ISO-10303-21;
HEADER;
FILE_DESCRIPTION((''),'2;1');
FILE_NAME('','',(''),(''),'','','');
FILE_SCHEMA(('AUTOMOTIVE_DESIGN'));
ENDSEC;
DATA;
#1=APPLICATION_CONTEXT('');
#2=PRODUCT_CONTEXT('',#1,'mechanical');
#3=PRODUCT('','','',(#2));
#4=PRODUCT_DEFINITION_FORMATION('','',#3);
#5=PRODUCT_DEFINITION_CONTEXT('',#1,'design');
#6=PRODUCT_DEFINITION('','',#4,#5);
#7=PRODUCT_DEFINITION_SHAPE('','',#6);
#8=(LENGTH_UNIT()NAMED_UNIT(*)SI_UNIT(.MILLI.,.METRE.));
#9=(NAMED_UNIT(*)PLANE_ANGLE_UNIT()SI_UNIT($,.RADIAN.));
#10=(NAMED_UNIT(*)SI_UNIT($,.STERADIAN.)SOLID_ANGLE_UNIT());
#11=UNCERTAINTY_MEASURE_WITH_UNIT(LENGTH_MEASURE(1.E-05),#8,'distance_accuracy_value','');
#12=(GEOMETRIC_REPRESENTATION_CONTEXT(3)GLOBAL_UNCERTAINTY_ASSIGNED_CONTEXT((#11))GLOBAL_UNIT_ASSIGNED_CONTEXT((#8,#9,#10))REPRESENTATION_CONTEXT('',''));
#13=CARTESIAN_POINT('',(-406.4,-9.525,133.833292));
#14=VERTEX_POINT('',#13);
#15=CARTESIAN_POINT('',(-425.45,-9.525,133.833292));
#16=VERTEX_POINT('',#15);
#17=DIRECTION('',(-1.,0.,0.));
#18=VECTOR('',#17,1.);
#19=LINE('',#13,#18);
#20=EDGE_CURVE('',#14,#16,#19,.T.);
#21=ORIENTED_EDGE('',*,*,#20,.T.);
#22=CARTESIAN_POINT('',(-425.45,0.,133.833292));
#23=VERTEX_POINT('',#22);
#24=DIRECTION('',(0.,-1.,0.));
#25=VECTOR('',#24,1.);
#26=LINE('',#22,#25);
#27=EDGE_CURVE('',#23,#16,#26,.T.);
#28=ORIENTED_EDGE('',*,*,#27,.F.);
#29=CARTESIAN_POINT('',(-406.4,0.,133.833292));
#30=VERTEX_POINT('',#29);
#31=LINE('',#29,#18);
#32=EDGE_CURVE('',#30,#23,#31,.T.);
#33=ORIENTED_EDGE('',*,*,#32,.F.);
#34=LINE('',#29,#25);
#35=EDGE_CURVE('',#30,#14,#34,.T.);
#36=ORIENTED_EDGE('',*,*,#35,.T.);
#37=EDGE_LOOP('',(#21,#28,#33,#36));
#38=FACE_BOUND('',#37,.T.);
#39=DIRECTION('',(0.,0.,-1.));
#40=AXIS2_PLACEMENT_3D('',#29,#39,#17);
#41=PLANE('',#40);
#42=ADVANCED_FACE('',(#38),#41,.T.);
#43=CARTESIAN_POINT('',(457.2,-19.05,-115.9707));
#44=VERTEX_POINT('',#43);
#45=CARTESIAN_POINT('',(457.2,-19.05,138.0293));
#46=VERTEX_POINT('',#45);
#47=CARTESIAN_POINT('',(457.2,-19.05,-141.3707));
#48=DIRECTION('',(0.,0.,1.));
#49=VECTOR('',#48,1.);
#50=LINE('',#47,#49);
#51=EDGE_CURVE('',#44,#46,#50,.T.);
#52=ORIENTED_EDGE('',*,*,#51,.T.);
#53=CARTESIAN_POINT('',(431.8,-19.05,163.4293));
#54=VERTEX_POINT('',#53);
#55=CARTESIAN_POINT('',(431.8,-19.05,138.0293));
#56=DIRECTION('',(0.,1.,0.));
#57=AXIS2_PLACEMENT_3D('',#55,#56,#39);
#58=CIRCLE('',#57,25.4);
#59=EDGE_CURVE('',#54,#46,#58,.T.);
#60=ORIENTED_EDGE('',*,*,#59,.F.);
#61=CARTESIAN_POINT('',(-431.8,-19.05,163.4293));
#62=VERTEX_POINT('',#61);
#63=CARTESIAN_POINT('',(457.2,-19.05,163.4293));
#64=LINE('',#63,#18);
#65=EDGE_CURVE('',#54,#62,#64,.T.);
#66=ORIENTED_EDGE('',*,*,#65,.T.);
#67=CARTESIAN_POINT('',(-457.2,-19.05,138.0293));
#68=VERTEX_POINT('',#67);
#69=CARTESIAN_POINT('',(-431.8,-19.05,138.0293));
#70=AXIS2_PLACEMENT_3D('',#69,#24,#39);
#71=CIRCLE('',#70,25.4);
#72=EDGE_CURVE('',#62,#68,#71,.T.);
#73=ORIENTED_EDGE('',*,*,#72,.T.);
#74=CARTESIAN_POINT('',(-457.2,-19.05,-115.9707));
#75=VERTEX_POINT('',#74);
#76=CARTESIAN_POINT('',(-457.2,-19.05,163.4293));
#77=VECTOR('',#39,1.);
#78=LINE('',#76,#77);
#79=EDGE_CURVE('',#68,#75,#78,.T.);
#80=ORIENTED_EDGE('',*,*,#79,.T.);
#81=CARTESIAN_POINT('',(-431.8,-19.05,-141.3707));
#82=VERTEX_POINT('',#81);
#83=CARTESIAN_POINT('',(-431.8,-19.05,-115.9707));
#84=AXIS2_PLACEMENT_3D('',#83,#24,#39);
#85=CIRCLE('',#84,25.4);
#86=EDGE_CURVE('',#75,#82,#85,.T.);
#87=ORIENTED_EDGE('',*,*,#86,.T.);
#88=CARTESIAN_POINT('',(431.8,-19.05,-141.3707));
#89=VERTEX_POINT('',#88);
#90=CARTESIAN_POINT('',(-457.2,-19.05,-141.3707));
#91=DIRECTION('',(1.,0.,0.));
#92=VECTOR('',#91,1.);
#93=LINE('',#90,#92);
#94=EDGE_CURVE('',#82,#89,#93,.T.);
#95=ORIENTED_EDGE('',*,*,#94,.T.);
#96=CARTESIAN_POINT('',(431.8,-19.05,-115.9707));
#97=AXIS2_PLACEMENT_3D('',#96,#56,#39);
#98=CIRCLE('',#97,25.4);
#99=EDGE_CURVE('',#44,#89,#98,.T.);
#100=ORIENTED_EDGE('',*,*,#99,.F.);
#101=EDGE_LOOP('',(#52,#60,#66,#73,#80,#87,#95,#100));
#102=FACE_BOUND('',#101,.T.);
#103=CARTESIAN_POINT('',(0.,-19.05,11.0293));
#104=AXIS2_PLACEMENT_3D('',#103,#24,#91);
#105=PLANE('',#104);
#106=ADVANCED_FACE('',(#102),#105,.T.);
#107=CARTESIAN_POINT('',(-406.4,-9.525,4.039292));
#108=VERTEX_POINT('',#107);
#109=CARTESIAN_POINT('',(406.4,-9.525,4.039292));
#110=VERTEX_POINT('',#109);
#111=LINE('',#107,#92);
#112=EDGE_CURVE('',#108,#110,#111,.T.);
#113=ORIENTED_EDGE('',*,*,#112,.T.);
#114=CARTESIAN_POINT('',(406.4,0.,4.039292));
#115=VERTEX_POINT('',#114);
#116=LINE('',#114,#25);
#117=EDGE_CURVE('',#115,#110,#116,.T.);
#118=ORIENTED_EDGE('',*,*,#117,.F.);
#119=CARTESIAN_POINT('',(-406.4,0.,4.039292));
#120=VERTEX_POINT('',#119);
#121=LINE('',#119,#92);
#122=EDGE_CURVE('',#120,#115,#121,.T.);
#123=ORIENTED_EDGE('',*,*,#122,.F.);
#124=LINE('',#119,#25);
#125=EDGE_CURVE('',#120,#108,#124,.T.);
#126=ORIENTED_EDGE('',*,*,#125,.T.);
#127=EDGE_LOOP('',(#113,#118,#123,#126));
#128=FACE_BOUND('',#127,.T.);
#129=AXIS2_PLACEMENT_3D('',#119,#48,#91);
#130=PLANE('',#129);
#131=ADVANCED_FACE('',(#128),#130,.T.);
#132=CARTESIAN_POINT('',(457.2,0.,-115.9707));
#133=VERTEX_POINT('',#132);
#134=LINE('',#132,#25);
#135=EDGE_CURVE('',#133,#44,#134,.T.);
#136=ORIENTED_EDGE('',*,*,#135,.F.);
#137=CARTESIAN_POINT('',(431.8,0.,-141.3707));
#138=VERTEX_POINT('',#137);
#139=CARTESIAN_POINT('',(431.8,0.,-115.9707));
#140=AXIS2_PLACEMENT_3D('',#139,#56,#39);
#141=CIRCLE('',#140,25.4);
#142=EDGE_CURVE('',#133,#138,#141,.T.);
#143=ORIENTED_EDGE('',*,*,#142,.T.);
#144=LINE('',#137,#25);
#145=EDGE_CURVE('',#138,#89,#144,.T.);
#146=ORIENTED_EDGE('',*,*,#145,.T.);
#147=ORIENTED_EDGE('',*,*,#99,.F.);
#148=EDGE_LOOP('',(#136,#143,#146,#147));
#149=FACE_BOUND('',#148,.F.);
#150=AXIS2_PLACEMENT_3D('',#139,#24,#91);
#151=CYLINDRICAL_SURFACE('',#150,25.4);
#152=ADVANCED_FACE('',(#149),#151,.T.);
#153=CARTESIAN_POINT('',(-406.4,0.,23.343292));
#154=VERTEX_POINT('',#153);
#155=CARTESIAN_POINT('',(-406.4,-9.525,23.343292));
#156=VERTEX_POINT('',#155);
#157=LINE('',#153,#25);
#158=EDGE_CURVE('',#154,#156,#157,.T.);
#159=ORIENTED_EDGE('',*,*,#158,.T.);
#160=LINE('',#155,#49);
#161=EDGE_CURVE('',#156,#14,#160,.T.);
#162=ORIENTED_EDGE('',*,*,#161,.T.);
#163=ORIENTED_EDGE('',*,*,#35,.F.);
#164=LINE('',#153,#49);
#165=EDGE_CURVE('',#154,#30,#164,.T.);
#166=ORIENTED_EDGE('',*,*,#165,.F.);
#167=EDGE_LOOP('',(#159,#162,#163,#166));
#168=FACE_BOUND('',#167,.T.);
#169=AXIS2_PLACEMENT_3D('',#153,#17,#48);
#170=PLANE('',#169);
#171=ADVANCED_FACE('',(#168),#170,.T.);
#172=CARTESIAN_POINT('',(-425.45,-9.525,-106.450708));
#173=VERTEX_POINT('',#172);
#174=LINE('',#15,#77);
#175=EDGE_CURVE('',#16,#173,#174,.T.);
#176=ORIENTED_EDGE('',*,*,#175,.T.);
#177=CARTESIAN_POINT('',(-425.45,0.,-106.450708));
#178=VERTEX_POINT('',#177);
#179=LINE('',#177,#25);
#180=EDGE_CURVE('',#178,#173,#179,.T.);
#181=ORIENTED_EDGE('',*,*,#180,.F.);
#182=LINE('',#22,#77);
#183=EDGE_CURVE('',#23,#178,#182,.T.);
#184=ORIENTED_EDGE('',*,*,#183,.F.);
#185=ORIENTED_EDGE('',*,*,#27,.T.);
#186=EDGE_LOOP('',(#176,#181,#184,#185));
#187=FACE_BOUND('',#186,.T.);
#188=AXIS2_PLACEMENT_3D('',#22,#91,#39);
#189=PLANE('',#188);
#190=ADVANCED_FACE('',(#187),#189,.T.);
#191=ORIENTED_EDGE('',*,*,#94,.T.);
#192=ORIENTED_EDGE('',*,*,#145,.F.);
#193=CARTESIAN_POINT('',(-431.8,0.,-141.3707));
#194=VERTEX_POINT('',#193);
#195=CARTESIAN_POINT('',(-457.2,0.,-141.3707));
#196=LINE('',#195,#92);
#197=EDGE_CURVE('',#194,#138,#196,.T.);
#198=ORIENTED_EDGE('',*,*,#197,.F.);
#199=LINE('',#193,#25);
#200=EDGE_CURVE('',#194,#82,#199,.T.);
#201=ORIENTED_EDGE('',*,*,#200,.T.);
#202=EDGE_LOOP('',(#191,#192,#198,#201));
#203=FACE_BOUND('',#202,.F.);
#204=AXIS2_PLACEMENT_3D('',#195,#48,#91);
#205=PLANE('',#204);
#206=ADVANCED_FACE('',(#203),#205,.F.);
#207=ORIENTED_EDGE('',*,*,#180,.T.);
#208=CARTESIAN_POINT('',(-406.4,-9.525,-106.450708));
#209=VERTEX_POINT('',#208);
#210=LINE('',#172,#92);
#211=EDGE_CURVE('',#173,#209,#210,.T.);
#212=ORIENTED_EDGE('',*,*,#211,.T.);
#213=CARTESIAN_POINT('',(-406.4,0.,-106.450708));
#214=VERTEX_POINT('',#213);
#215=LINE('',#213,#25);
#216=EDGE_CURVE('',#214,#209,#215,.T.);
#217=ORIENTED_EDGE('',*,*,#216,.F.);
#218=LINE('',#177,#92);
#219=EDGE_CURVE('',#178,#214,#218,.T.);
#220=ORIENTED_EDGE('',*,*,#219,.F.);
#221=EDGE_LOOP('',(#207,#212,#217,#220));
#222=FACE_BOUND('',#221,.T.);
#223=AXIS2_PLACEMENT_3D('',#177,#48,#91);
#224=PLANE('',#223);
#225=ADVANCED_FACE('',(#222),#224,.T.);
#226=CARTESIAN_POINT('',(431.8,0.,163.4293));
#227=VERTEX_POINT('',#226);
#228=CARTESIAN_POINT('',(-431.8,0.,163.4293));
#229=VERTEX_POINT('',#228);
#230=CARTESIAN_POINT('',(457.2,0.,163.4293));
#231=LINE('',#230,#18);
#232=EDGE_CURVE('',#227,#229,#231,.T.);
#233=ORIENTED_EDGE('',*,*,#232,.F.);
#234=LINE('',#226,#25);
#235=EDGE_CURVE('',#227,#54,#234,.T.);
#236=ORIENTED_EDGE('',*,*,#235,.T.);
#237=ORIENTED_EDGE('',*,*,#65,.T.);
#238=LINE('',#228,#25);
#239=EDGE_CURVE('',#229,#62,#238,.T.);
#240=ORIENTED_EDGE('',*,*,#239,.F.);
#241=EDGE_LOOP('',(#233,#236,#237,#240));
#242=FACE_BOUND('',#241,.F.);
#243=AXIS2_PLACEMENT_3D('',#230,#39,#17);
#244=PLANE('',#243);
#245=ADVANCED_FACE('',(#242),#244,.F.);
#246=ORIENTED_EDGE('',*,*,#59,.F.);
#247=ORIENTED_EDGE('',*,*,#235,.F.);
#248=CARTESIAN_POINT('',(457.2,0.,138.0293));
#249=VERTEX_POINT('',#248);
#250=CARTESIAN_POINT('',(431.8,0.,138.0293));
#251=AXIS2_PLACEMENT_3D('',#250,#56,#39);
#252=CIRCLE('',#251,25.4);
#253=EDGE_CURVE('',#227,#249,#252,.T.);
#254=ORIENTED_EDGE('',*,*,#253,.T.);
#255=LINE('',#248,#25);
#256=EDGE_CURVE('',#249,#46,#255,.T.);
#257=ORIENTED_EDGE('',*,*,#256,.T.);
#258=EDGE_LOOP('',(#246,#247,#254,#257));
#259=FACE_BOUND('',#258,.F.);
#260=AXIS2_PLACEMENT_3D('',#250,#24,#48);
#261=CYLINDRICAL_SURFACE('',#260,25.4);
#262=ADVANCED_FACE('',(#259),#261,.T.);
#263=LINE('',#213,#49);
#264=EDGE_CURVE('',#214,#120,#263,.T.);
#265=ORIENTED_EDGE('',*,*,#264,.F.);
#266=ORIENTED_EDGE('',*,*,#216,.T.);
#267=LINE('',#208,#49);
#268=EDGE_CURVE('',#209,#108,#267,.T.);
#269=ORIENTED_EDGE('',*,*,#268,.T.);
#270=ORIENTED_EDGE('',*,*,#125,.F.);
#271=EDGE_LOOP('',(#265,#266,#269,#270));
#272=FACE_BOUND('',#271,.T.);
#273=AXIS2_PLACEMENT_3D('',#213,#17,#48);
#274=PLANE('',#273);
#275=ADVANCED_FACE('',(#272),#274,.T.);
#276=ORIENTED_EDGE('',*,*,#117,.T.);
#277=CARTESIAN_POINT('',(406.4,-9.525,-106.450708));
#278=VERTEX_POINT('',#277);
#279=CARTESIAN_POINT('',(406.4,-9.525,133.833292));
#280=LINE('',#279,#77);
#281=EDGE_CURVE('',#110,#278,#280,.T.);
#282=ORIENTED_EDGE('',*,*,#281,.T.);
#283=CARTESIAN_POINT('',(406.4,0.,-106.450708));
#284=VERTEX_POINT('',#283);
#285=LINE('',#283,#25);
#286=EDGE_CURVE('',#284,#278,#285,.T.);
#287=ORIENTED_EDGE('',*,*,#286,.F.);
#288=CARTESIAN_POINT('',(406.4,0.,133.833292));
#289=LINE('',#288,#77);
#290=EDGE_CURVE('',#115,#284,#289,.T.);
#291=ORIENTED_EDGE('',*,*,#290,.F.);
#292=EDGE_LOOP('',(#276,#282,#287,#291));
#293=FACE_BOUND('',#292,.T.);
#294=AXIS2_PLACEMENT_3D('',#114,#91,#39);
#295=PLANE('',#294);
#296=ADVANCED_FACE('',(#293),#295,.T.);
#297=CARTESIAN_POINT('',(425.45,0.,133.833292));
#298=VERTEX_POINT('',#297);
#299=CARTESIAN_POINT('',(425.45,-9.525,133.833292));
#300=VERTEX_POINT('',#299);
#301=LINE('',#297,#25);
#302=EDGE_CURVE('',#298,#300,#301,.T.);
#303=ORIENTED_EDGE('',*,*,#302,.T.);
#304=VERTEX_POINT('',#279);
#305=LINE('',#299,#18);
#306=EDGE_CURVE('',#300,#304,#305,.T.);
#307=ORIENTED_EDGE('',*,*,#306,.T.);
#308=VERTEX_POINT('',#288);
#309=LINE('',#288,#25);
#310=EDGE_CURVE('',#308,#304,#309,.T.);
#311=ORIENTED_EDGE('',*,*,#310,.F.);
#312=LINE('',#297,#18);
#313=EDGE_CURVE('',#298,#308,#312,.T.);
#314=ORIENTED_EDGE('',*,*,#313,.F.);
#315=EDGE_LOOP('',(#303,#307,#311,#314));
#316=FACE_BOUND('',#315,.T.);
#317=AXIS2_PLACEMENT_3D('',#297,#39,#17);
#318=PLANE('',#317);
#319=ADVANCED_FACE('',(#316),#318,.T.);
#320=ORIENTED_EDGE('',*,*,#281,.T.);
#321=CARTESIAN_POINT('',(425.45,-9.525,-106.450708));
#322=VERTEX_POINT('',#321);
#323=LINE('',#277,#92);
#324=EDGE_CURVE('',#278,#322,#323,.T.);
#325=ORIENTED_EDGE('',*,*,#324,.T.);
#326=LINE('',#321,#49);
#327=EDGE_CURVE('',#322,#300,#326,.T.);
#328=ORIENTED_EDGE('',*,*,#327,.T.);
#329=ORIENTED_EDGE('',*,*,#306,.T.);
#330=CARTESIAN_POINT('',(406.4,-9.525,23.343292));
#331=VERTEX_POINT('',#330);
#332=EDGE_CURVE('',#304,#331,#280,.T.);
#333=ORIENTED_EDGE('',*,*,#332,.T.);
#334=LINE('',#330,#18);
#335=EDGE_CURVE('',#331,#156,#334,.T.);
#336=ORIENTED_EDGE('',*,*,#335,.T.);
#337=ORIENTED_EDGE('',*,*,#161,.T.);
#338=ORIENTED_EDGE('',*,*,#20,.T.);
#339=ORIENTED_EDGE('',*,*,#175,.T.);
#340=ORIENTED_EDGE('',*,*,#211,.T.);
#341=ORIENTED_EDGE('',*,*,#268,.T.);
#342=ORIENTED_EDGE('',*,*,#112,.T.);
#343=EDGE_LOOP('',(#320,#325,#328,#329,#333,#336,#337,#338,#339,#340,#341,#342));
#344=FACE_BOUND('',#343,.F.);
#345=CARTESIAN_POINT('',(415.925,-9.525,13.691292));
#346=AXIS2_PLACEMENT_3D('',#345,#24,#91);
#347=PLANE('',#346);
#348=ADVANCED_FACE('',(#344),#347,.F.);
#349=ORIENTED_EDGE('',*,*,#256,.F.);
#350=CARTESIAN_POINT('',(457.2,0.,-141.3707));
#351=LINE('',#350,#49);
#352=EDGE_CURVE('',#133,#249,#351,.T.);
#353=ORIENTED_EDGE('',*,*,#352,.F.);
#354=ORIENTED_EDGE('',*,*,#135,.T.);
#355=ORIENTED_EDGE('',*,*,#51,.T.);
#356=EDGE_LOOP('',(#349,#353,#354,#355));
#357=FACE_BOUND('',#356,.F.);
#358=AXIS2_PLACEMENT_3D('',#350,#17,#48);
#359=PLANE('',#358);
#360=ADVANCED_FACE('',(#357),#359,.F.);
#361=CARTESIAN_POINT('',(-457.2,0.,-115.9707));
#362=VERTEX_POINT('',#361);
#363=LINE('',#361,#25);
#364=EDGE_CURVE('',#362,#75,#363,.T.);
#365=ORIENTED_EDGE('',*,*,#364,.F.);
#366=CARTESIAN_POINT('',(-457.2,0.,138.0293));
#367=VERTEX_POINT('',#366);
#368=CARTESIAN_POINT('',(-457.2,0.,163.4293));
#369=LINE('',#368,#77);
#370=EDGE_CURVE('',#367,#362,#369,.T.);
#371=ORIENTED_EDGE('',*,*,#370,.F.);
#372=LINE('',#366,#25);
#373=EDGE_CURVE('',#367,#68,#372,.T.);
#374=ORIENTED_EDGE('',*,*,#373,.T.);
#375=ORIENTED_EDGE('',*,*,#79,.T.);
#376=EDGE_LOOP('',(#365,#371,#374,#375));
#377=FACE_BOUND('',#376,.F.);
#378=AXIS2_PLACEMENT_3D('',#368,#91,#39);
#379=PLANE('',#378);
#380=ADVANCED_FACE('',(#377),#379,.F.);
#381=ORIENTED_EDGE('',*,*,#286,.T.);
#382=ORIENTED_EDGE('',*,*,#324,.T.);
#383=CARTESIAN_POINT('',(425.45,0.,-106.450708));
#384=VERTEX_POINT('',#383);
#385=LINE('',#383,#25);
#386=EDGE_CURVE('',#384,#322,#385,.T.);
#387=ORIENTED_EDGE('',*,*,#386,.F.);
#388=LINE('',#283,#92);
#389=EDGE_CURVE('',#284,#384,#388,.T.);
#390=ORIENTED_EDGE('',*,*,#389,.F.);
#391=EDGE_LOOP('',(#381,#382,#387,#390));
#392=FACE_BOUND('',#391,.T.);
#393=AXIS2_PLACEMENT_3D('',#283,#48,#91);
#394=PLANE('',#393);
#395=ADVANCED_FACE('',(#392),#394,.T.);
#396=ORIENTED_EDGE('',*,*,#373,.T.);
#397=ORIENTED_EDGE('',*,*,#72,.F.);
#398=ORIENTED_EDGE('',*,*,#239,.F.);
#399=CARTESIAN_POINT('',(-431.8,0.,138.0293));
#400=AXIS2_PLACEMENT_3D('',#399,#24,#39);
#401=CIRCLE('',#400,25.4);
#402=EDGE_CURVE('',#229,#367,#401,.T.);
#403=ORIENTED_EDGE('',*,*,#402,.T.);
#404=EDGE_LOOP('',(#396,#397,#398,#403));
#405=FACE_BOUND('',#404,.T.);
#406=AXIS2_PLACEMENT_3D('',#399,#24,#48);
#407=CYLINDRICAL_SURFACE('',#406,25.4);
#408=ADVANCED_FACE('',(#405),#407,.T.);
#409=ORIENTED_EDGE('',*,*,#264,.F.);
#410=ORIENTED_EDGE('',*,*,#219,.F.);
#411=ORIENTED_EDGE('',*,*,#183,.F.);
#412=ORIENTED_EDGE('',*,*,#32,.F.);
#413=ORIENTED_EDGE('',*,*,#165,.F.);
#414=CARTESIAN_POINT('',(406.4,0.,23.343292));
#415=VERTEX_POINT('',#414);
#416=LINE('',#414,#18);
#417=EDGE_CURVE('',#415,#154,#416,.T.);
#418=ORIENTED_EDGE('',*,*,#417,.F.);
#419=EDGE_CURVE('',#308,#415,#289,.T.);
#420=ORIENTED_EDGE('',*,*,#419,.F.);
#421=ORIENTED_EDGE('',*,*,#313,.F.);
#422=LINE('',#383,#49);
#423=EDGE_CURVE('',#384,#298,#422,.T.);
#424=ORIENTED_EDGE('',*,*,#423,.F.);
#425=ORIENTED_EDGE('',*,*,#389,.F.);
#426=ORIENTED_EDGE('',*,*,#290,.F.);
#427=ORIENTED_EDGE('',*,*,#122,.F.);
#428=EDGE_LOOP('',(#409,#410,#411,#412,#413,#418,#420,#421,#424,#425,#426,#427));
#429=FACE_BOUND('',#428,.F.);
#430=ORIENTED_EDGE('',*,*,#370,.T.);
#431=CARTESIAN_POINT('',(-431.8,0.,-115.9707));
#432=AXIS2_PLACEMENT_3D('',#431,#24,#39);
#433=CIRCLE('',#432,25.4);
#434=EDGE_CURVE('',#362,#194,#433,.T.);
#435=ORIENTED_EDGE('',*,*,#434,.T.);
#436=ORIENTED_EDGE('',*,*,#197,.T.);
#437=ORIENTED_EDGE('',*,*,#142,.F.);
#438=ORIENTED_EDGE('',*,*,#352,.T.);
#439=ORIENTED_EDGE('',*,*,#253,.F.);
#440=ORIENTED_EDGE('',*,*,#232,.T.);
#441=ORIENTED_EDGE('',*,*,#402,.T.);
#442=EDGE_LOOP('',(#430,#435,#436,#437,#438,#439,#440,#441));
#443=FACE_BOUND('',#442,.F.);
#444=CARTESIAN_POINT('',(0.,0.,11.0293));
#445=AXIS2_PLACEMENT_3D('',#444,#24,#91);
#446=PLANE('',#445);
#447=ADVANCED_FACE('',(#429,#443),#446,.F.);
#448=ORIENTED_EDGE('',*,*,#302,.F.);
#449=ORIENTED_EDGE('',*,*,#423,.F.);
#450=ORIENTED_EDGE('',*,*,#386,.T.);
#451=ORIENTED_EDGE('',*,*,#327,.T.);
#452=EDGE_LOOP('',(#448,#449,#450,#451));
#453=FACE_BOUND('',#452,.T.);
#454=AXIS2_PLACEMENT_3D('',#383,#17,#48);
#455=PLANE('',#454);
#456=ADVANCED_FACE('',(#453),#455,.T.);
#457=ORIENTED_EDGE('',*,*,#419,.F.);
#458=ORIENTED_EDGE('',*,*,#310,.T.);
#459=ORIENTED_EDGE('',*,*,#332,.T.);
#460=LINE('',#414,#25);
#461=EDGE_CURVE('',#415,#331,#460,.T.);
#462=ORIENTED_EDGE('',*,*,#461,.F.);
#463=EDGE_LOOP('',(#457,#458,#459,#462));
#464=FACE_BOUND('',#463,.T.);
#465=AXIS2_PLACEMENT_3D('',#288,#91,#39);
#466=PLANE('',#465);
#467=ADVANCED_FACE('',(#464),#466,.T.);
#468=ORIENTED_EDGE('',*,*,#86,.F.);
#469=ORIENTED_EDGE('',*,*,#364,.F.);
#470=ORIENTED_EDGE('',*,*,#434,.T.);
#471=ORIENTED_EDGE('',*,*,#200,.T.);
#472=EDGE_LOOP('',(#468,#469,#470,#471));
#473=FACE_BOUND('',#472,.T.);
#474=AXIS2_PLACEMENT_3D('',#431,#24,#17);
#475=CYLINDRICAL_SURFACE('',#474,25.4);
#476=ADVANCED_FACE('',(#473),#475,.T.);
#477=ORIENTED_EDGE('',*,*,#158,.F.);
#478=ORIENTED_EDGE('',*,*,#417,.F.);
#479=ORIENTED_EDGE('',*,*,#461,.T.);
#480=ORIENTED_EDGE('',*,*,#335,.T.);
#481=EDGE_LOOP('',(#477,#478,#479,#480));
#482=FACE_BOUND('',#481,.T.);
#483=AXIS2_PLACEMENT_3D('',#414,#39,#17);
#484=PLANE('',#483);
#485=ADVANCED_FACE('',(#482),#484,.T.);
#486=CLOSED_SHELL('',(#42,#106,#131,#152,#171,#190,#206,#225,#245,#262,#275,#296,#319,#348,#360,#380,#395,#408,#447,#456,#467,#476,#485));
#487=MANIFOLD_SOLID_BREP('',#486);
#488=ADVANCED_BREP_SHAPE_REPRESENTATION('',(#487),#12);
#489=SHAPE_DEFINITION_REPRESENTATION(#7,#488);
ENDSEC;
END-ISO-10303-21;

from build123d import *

# Parameters (mm, degrees)
F1_DEPTH = 19.05
F3_DEPTH = 9.525
F4_R     = 25.4
F5_R     = 25.4
F6_R     = 25.4
F7_R     = 25.4


# Not quite as in the source:
# - a length typed as a fraction of an inch, garbled in the dataset ("3 / 203.2 mm" for 3/8 in), is restored


with BuildPart() as f1:
    # F0 (on Front) → F1 (new body)
    with BuildSketch(Plane.XZ):
        Polygon((457.2, 163.4292998382), (0, 163.4292998382), (-457.2, 163.4292998382), (-457.2, -141.3707001618), (0, -141.3707001618), (457.2, -141.3707001618), align=None)
    extrude(amount=F1_DEPTH)

    # F2 (on Front) → F3 (cut)
    with BuildSketch(Plane.XZ):
        Polygon((425.45, -106.4507083202), (425.45, 13.6912916798), (425.45, 133.8332916798), (406.4, 133.8332916798), (406.4, 23.3432916798), (406.4, 13.6912916798), (406.4, 4.0392916798), (406.4, -106.4507083202), align=None)
        Polygon((406.4, 13.6912916798), (406.4, 23.3432916798), (-406.4, 23.3432916798), (-406.4, 13.6912916798), (-406.4, 4.0392916798), (406.4, 4.0392916798), align=None)
        Polygon((-406.4, 13.6912916798), (-406.4, 23.3432916798), (-406.4, 133.8332916798), (-425.45, 133.8332916798), (-425.45, 13.6912916798), (-425.45, -106.4507083202), (-406.4, -106.4507083202), (-406.4, 4.0392916798), align=None)
    extrude(amount=F3_DEPTH, mode=Mode.SUBTRACT)

    # F4
    f4_edges = [f1.edges().sort_by_distance(p)[0] for p in [
        (457.2, -9.525, 163.4293),
    ]]
    fillet(f4_edges, radius=F4_R)

    # F5
    f5_edges = [f1.edges().sort_by_distance(p)[0] for p in [
        (457.2, -9.525, -141.3707),
    ]]
    fillet(f5_edges, radius=F5_R)

    # F6
    f6_edges = [f1.edges().sort_by_distance(p)[0] for p in [
        (-457.2, -9.525, 163.4293),
    ]]
    fillet(f6_edges, radius=F6_R)

    # F7
    f7_edges = [f1.edges().sort_by_distance(p)[0] for p in [
        (-457.2, -9.525, -141.3707),
    ]]
    fillet(f7_edges, radius=F7_R)


solid = f1.part
